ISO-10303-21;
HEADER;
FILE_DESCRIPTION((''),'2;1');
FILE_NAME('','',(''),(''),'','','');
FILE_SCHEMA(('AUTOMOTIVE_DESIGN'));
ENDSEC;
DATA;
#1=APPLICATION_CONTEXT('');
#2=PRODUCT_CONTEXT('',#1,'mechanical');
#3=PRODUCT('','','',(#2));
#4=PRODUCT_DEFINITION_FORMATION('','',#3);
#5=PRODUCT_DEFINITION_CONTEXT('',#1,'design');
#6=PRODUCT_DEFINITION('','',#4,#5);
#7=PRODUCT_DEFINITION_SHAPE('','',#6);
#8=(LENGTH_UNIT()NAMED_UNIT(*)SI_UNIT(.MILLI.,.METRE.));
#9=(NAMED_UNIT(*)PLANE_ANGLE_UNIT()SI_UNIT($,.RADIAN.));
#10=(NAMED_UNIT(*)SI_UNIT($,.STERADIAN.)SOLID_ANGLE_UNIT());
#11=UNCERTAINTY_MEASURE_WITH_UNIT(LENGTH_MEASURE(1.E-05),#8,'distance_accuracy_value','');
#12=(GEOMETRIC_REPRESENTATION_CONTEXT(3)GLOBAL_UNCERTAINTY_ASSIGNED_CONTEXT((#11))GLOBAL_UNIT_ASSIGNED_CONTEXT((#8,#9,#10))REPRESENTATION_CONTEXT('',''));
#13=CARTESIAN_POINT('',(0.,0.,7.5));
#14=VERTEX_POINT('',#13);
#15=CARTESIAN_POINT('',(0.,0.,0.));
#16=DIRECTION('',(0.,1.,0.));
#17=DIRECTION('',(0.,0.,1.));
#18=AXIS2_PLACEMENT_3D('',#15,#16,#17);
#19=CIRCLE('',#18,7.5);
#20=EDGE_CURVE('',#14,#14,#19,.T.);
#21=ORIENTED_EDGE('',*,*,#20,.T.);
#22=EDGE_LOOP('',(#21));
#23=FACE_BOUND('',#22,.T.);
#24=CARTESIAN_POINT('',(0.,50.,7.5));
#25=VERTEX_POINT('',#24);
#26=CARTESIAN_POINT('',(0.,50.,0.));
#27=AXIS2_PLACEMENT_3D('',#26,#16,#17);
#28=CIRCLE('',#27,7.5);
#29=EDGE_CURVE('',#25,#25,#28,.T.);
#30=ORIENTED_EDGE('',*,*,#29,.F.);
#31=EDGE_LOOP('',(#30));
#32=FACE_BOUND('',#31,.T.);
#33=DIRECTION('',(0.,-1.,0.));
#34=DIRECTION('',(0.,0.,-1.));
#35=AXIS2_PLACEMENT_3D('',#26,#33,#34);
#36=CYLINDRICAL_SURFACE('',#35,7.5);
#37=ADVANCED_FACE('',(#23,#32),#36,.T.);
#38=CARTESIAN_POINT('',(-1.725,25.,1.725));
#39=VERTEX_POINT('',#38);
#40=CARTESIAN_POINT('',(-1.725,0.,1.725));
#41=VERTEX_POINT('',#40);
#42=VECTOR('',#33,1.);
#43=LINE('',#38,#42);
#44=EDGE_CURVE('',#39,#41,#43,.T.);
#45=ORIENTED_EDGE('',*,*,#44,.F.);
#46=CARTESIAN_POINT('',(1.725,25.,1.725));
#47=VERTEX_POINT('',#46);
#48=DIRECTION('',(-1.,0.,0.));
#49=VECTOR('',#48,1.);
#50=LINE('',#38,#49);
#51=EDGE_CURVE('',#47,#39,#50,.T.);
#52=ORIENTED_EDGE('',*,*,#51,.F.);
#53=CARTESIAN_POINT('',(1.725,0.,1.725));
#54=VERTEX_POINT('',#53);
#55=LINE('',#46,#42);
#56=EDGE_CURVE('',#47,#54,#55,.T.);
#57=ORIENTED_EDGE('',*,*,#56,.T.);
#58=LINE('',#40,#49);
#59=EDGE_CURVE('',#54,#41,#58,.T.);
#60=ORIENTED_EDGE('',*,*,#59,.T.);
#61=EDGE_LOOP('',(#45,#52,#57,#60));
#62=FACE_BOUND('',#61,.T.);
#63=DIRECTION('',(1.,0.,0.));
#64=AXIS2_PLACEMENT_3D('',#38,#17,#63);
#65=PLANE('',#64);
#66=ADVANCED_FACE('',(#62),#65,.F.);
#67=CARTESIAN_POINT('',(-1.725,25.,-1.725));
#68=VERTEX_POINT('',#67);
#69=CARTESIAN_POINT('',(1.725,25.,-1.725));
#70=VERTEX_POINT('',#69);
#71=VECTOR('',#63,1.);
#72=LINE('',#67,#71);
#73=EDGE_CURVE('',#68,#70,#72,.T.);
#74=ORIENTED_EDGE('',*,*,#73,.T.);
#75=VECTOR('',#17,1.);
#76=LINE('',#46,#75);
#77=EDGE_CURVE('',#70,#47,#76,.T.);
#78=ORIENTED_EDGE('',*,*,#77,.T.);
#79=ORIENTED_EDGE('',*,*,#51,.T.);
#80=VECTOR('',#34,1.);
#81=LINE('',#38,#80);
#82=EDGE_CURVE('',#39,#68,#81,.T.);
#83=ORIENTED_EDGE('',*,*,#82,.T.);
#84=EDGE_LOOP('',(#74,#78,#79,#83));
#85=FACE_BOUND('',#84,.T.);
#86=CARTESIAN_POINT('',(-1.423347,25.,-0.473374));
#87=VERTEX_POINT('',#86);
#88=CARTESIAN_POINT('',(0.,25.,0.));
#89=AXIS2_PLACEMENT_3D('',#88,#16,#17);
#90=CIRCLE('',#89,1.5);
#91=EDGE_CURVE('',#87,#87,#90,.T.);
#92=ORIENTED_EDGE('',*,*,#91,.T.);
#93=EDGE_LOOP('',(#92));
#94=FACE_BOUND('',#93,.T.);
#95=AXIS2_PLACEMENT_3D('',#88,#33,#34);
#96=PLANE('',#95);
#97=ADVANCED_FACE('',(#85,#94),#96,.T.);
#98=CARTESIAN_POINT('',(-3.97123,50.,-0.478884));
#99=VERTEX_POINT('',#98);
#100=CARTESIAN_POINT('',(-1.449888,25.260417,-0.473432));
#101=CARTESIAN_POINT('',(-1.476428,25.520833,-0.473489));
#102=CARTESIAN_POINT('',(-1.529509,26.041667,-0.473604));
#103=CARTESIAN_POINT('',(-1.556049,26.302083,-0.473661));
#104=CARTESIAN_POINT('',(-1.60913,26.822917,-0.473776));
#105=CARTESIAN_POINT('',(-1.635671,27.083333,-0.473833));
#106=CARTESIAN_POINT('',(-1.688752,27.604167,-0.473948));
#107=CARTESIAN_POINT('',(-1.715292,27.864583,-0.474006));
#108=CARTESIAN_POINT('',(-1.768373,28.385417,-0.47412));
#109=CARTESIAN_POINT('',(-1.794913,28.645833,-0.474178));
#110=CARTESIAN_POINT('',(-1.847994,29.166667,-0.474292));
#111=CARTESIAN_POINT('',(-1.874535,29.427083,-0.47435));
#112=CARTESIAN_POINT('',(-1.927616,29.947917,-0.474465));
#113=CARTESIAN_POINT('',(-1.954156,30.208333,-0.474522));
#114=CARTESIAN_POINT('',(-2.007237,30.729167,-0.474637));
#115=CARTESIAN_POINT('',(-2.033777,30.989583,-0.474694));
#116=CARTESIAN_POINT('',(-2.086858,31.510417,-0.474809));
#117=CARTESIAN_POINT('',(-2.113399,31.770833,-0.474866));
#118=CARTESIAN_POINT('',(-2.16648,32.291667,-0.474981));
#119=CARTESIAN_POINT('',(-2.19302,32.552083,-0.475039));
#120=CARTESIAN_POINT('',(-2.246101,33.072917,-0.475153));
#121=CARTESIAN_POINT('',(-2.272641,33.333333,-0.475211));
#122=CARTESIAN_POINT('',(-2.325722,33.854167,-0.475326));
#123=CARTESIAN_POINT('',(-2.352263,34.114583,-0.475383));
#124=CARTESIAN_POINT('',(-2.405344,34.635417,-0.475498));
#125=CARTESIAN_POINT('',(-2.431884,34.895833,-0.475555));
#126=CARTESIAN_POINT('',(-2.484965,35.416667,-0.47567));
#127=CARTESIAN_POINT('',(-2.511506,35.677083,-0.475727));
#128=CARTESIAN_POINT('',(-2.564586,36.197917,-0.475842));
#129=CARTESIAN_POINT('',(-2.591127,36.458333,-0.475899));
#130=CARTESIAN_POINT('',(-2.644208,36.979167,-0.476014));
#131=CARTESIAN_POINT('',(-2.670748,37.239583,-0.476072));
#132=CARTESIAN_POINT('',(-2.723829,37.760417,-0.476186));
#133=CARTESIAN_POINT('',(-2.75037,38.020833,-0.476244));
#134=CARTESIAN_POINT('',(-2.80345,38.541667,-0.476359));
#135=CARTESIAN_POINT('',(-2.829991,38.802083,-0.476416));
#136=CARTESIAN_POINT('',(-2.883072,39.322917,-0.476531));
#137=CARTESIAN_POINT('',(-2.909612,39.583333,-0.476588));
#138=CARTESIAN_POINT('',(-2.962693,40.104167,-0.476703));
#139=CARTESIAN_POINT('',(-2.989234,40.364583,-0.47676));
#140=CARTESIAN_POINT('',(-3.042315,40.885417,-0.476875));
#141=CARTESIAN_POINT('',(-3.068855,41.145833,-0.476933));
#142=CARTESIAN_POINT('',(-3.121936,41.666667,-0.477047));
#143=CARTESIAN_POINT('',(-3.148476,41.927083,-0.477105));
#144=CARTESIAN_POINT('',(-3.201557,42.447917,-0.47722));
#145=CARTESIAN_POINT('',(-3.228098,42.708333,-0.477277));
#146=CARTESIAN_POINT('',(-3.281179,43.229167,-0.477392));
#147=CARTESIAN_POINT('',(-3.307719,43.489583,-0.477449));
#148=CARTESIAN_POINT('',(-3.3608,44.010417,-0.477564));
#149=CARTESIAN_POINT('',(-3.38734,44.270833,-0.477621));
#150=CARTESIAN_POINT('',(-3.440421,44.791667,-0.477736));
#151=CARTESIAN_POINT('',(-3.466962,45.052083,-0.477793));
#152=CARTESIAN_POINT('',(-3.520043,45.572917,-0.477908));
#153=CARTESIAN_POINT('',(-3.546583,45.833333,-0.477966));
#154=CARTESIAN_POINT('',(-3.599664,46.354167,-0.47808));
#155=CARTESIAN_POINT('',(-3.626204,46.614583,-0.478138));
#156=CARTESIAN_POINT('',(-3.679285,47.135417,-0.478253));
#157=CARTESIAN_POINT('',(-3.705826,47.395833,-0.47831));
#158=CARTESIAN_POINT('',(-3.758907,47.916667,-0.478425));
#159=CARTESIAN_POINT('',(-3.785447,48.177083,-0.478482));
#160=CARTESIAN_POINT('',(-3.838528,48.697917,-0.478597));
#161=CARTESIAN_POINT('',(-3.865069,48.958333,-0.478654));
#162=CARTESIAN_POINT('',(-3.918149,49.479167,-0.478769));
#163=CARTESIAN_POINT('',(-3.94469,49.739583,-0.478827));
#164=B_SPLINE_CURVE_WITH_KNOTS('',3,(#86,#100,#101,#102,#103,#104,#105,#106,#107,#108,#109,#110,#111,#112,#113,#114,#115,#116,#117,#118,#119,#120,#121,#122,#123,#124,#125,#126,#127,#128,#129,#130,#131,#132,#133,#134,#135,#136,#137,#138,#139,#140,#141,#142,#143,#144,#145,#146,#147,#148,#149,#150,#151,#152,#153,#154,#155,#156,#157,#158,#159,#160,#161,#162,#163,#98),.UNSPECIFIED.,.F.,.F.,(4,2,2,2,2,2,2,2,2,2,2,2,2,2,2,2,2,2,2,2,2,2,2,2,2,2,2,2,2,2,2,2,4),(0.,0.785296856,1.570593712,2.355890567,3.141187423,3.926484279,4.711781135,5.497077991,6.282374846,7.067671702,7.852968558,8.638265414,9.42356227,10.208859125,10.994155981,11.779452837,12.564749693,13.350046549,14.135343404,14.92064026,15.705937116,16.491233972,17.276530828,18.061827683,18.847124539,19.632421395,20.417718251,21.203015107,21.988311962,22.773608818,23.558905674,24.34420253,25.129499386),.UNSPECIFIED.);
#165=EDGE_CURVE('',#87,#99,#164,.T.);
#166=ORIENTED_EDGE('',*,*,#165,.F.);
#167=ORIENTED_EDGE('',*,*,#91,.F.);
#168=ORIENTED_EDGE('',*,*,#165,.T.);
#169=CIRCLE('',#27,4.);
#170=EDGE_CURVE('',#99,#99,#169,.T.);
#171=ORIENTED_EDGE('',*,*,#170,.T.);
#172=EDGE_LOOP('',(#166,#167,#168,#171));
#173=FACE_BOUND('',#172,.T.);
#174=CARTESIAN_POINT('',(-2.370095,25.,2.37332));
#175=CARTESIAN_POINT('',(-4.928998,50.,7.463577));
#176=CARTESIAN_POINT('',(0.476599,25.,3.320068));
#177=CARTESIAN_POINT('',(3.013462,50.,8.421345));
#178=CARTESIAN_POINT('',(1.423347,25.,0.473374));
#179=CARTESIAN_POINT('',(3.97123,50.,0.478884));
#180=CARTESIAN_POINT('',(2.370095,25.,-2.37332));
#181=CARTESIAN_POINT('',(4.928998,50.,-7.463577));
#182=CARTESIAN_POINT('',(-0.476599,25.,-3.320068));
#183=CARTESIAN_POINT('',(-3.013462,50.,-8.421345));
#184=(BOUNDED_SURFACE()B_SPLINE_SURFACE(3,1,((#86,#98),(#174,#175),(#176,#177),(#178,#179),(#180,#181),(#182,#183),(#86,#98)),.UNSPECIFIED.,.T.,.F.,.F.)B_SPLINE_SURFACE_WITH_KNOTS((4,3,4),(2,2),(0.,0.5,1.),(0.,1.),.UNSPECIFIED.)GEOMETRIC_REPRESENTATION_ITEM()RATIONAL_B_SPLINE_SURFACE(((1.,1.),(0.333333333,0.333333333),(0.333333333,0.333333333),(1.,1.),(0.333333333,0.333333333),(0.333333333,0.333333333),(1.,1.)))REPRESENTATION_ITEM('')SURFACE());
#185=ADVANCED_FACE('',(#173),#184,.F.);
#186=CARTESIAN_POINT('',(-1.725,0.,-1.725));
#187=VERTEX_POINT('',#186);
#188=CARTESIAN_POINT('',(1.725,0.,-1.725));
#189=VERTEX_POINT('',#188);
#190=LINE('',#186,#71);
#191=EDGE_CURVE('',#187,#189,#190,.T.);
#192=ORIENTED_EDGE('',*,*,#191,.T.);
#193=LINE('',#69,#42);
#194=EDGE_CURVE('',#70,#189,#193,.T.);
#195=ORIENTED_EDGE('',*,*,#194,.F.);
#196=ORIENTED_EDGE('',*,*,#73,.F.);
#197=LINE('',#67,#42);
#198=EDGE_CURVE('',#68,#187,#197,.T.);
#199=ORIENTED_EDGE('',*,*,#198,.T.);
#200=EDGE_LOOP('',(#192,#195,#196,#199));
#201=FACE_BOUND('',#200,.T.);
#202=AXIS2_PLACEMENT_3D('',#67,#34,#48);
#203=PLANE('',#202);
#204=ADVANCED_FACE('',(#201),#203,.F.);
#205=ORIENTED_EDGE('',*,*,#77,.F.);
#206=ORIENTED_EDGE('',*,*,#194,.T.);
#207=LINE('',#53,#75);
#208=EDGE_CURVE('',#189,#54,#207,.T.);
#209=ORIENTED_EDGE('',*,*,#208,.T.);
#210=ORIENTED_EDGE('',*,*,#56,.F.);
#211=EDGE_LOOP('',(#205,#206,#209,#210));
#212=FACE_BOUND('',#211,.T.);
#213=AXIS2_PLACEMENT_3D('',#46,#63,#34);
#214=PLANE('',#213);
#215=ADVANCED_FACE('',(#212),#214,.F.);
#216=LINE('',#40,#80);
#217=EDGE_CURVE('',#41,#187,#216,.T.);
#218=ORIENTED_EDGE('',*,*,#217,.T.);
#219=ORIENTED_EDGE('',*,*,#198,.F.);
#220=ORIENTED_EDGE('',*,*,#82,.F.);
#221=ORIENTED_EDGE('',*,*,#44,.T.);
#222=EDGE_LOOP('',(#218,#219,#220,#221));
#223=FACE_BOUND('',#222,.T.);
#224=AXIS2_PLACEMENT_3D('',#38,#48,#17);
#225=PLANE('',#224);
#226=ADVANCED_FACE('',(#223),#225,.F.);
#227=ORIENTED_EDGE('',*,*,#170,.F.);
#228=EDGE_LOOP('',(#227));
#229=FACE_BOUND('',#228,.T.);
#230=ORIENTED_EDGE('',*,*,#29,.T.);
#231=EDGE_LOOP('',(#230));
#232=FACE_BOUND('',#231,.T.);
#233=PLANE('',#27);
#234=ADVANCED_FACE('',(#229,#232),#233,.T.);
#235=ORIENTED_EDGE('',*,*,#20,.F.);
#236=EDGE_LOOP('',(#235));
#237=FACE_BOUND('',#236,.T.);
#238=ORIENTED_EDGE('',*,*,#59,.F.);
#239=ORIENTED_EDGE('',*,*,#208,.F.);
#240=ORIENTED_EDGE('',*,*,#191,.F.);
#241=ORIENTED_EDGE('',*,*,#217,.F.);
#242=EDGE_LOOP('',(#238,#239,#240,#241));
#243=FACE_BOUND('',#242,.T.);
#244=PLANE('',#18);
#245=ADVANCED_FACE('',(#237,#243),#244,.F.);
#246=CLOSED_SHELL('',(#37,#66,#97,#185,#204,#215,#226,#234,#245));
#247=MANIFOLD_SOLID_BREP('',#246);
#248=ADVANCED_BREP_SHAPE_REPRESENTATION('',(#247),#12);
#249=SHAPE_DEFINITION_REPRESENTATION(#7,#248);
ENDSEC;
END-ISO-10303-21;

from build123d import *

# Parameters (mm, degrees)
SKETCH1_R           = 7.5
BOSS_EXTRUDE1_DEPTH = 50
SKETCH3_W           = 3.45
SKETCH3_H           = 3.45
CUT_EXTRUDE2_DEPTH  = 25


with BuildPart() as part:
    # Sketch1 → Boss-Extrude1 (new body)
    with BuildSketch(Plane(origin=(0, 0, 0), x_dir=(1, 0, 0), z_dir=(0, 1, 0))):
        with Locations(Location((0, 0, 0), (0, 0, 270))):
            Circle(SKETCH1_R)
    extrude(amount=BOSS_EXTRUDE1_DEPTH)

    # Sketch3 → Cut-Extrude2 (cut)
    with BuildSketch(Plane.XZ):
        Rectangle(SKETCH3_W, SKETCH3_H)
    extrude(amount=-CUT_EXTRUDE2_DEPTH, mode=Mode.SUBTRACT)

    # Cut-Loft2: read off the stored shape, not the designer's step
    # Cut-Loft2: loft between two sections, ruled curve by curve
    cut_loft2_from = [
        Edge.make_bspline([(-1.423347069, 25, -0.473374188), (-2.370095445, 25, 2.373319949), (0.476598692, 25, 3.320068326), (1.423347069, 25, 0.473374188), (2.370095445, 25, -2.373319949), (-0.476598692, 25, -3.320068326), (-1.423347069, 25, -0.473374188)], [0, 0, 0, 0, 0.5, 0.5, 0.5, 1, 1, 1, 1], 3, [1, 0.333333333, 0.333333333, 1, 0.333333333, 0.333333333, 1]),
    ]
    cut_loft2_to = [
        Edge.make_bspline([(-3.971230311, 50, -0.478883932), (-4.928998175, 50, 7.463576689), (3.013462446, 50, 8.421344553), (3.971230311, 50, 0.478883932), (4.928998175, 50, -7.463576689), (-3.013462446, 50, -8.421344553), (-3.971230311, 50, -0.478883932)], [0, 0, 0, 0, 0.5, 0.5, 0.5, 1, 1, 1, 1], 3, [1, 0.333333333, 0.333333333, 1, 0.333333333, 0.333333333, 1]),
    ]
    cut_loft2 = Solid(Shell([*[Face.make_surface_from_curves(cut_loft2_from[k], cut_loft2_to[k]) for k in range(1)], Face(Wire(cut_loft2_from)), Face(Wire(cut_loft2_to))]))
    add(cut_loft2, mode=Mode.SUBTRACT)


solid = part.part
